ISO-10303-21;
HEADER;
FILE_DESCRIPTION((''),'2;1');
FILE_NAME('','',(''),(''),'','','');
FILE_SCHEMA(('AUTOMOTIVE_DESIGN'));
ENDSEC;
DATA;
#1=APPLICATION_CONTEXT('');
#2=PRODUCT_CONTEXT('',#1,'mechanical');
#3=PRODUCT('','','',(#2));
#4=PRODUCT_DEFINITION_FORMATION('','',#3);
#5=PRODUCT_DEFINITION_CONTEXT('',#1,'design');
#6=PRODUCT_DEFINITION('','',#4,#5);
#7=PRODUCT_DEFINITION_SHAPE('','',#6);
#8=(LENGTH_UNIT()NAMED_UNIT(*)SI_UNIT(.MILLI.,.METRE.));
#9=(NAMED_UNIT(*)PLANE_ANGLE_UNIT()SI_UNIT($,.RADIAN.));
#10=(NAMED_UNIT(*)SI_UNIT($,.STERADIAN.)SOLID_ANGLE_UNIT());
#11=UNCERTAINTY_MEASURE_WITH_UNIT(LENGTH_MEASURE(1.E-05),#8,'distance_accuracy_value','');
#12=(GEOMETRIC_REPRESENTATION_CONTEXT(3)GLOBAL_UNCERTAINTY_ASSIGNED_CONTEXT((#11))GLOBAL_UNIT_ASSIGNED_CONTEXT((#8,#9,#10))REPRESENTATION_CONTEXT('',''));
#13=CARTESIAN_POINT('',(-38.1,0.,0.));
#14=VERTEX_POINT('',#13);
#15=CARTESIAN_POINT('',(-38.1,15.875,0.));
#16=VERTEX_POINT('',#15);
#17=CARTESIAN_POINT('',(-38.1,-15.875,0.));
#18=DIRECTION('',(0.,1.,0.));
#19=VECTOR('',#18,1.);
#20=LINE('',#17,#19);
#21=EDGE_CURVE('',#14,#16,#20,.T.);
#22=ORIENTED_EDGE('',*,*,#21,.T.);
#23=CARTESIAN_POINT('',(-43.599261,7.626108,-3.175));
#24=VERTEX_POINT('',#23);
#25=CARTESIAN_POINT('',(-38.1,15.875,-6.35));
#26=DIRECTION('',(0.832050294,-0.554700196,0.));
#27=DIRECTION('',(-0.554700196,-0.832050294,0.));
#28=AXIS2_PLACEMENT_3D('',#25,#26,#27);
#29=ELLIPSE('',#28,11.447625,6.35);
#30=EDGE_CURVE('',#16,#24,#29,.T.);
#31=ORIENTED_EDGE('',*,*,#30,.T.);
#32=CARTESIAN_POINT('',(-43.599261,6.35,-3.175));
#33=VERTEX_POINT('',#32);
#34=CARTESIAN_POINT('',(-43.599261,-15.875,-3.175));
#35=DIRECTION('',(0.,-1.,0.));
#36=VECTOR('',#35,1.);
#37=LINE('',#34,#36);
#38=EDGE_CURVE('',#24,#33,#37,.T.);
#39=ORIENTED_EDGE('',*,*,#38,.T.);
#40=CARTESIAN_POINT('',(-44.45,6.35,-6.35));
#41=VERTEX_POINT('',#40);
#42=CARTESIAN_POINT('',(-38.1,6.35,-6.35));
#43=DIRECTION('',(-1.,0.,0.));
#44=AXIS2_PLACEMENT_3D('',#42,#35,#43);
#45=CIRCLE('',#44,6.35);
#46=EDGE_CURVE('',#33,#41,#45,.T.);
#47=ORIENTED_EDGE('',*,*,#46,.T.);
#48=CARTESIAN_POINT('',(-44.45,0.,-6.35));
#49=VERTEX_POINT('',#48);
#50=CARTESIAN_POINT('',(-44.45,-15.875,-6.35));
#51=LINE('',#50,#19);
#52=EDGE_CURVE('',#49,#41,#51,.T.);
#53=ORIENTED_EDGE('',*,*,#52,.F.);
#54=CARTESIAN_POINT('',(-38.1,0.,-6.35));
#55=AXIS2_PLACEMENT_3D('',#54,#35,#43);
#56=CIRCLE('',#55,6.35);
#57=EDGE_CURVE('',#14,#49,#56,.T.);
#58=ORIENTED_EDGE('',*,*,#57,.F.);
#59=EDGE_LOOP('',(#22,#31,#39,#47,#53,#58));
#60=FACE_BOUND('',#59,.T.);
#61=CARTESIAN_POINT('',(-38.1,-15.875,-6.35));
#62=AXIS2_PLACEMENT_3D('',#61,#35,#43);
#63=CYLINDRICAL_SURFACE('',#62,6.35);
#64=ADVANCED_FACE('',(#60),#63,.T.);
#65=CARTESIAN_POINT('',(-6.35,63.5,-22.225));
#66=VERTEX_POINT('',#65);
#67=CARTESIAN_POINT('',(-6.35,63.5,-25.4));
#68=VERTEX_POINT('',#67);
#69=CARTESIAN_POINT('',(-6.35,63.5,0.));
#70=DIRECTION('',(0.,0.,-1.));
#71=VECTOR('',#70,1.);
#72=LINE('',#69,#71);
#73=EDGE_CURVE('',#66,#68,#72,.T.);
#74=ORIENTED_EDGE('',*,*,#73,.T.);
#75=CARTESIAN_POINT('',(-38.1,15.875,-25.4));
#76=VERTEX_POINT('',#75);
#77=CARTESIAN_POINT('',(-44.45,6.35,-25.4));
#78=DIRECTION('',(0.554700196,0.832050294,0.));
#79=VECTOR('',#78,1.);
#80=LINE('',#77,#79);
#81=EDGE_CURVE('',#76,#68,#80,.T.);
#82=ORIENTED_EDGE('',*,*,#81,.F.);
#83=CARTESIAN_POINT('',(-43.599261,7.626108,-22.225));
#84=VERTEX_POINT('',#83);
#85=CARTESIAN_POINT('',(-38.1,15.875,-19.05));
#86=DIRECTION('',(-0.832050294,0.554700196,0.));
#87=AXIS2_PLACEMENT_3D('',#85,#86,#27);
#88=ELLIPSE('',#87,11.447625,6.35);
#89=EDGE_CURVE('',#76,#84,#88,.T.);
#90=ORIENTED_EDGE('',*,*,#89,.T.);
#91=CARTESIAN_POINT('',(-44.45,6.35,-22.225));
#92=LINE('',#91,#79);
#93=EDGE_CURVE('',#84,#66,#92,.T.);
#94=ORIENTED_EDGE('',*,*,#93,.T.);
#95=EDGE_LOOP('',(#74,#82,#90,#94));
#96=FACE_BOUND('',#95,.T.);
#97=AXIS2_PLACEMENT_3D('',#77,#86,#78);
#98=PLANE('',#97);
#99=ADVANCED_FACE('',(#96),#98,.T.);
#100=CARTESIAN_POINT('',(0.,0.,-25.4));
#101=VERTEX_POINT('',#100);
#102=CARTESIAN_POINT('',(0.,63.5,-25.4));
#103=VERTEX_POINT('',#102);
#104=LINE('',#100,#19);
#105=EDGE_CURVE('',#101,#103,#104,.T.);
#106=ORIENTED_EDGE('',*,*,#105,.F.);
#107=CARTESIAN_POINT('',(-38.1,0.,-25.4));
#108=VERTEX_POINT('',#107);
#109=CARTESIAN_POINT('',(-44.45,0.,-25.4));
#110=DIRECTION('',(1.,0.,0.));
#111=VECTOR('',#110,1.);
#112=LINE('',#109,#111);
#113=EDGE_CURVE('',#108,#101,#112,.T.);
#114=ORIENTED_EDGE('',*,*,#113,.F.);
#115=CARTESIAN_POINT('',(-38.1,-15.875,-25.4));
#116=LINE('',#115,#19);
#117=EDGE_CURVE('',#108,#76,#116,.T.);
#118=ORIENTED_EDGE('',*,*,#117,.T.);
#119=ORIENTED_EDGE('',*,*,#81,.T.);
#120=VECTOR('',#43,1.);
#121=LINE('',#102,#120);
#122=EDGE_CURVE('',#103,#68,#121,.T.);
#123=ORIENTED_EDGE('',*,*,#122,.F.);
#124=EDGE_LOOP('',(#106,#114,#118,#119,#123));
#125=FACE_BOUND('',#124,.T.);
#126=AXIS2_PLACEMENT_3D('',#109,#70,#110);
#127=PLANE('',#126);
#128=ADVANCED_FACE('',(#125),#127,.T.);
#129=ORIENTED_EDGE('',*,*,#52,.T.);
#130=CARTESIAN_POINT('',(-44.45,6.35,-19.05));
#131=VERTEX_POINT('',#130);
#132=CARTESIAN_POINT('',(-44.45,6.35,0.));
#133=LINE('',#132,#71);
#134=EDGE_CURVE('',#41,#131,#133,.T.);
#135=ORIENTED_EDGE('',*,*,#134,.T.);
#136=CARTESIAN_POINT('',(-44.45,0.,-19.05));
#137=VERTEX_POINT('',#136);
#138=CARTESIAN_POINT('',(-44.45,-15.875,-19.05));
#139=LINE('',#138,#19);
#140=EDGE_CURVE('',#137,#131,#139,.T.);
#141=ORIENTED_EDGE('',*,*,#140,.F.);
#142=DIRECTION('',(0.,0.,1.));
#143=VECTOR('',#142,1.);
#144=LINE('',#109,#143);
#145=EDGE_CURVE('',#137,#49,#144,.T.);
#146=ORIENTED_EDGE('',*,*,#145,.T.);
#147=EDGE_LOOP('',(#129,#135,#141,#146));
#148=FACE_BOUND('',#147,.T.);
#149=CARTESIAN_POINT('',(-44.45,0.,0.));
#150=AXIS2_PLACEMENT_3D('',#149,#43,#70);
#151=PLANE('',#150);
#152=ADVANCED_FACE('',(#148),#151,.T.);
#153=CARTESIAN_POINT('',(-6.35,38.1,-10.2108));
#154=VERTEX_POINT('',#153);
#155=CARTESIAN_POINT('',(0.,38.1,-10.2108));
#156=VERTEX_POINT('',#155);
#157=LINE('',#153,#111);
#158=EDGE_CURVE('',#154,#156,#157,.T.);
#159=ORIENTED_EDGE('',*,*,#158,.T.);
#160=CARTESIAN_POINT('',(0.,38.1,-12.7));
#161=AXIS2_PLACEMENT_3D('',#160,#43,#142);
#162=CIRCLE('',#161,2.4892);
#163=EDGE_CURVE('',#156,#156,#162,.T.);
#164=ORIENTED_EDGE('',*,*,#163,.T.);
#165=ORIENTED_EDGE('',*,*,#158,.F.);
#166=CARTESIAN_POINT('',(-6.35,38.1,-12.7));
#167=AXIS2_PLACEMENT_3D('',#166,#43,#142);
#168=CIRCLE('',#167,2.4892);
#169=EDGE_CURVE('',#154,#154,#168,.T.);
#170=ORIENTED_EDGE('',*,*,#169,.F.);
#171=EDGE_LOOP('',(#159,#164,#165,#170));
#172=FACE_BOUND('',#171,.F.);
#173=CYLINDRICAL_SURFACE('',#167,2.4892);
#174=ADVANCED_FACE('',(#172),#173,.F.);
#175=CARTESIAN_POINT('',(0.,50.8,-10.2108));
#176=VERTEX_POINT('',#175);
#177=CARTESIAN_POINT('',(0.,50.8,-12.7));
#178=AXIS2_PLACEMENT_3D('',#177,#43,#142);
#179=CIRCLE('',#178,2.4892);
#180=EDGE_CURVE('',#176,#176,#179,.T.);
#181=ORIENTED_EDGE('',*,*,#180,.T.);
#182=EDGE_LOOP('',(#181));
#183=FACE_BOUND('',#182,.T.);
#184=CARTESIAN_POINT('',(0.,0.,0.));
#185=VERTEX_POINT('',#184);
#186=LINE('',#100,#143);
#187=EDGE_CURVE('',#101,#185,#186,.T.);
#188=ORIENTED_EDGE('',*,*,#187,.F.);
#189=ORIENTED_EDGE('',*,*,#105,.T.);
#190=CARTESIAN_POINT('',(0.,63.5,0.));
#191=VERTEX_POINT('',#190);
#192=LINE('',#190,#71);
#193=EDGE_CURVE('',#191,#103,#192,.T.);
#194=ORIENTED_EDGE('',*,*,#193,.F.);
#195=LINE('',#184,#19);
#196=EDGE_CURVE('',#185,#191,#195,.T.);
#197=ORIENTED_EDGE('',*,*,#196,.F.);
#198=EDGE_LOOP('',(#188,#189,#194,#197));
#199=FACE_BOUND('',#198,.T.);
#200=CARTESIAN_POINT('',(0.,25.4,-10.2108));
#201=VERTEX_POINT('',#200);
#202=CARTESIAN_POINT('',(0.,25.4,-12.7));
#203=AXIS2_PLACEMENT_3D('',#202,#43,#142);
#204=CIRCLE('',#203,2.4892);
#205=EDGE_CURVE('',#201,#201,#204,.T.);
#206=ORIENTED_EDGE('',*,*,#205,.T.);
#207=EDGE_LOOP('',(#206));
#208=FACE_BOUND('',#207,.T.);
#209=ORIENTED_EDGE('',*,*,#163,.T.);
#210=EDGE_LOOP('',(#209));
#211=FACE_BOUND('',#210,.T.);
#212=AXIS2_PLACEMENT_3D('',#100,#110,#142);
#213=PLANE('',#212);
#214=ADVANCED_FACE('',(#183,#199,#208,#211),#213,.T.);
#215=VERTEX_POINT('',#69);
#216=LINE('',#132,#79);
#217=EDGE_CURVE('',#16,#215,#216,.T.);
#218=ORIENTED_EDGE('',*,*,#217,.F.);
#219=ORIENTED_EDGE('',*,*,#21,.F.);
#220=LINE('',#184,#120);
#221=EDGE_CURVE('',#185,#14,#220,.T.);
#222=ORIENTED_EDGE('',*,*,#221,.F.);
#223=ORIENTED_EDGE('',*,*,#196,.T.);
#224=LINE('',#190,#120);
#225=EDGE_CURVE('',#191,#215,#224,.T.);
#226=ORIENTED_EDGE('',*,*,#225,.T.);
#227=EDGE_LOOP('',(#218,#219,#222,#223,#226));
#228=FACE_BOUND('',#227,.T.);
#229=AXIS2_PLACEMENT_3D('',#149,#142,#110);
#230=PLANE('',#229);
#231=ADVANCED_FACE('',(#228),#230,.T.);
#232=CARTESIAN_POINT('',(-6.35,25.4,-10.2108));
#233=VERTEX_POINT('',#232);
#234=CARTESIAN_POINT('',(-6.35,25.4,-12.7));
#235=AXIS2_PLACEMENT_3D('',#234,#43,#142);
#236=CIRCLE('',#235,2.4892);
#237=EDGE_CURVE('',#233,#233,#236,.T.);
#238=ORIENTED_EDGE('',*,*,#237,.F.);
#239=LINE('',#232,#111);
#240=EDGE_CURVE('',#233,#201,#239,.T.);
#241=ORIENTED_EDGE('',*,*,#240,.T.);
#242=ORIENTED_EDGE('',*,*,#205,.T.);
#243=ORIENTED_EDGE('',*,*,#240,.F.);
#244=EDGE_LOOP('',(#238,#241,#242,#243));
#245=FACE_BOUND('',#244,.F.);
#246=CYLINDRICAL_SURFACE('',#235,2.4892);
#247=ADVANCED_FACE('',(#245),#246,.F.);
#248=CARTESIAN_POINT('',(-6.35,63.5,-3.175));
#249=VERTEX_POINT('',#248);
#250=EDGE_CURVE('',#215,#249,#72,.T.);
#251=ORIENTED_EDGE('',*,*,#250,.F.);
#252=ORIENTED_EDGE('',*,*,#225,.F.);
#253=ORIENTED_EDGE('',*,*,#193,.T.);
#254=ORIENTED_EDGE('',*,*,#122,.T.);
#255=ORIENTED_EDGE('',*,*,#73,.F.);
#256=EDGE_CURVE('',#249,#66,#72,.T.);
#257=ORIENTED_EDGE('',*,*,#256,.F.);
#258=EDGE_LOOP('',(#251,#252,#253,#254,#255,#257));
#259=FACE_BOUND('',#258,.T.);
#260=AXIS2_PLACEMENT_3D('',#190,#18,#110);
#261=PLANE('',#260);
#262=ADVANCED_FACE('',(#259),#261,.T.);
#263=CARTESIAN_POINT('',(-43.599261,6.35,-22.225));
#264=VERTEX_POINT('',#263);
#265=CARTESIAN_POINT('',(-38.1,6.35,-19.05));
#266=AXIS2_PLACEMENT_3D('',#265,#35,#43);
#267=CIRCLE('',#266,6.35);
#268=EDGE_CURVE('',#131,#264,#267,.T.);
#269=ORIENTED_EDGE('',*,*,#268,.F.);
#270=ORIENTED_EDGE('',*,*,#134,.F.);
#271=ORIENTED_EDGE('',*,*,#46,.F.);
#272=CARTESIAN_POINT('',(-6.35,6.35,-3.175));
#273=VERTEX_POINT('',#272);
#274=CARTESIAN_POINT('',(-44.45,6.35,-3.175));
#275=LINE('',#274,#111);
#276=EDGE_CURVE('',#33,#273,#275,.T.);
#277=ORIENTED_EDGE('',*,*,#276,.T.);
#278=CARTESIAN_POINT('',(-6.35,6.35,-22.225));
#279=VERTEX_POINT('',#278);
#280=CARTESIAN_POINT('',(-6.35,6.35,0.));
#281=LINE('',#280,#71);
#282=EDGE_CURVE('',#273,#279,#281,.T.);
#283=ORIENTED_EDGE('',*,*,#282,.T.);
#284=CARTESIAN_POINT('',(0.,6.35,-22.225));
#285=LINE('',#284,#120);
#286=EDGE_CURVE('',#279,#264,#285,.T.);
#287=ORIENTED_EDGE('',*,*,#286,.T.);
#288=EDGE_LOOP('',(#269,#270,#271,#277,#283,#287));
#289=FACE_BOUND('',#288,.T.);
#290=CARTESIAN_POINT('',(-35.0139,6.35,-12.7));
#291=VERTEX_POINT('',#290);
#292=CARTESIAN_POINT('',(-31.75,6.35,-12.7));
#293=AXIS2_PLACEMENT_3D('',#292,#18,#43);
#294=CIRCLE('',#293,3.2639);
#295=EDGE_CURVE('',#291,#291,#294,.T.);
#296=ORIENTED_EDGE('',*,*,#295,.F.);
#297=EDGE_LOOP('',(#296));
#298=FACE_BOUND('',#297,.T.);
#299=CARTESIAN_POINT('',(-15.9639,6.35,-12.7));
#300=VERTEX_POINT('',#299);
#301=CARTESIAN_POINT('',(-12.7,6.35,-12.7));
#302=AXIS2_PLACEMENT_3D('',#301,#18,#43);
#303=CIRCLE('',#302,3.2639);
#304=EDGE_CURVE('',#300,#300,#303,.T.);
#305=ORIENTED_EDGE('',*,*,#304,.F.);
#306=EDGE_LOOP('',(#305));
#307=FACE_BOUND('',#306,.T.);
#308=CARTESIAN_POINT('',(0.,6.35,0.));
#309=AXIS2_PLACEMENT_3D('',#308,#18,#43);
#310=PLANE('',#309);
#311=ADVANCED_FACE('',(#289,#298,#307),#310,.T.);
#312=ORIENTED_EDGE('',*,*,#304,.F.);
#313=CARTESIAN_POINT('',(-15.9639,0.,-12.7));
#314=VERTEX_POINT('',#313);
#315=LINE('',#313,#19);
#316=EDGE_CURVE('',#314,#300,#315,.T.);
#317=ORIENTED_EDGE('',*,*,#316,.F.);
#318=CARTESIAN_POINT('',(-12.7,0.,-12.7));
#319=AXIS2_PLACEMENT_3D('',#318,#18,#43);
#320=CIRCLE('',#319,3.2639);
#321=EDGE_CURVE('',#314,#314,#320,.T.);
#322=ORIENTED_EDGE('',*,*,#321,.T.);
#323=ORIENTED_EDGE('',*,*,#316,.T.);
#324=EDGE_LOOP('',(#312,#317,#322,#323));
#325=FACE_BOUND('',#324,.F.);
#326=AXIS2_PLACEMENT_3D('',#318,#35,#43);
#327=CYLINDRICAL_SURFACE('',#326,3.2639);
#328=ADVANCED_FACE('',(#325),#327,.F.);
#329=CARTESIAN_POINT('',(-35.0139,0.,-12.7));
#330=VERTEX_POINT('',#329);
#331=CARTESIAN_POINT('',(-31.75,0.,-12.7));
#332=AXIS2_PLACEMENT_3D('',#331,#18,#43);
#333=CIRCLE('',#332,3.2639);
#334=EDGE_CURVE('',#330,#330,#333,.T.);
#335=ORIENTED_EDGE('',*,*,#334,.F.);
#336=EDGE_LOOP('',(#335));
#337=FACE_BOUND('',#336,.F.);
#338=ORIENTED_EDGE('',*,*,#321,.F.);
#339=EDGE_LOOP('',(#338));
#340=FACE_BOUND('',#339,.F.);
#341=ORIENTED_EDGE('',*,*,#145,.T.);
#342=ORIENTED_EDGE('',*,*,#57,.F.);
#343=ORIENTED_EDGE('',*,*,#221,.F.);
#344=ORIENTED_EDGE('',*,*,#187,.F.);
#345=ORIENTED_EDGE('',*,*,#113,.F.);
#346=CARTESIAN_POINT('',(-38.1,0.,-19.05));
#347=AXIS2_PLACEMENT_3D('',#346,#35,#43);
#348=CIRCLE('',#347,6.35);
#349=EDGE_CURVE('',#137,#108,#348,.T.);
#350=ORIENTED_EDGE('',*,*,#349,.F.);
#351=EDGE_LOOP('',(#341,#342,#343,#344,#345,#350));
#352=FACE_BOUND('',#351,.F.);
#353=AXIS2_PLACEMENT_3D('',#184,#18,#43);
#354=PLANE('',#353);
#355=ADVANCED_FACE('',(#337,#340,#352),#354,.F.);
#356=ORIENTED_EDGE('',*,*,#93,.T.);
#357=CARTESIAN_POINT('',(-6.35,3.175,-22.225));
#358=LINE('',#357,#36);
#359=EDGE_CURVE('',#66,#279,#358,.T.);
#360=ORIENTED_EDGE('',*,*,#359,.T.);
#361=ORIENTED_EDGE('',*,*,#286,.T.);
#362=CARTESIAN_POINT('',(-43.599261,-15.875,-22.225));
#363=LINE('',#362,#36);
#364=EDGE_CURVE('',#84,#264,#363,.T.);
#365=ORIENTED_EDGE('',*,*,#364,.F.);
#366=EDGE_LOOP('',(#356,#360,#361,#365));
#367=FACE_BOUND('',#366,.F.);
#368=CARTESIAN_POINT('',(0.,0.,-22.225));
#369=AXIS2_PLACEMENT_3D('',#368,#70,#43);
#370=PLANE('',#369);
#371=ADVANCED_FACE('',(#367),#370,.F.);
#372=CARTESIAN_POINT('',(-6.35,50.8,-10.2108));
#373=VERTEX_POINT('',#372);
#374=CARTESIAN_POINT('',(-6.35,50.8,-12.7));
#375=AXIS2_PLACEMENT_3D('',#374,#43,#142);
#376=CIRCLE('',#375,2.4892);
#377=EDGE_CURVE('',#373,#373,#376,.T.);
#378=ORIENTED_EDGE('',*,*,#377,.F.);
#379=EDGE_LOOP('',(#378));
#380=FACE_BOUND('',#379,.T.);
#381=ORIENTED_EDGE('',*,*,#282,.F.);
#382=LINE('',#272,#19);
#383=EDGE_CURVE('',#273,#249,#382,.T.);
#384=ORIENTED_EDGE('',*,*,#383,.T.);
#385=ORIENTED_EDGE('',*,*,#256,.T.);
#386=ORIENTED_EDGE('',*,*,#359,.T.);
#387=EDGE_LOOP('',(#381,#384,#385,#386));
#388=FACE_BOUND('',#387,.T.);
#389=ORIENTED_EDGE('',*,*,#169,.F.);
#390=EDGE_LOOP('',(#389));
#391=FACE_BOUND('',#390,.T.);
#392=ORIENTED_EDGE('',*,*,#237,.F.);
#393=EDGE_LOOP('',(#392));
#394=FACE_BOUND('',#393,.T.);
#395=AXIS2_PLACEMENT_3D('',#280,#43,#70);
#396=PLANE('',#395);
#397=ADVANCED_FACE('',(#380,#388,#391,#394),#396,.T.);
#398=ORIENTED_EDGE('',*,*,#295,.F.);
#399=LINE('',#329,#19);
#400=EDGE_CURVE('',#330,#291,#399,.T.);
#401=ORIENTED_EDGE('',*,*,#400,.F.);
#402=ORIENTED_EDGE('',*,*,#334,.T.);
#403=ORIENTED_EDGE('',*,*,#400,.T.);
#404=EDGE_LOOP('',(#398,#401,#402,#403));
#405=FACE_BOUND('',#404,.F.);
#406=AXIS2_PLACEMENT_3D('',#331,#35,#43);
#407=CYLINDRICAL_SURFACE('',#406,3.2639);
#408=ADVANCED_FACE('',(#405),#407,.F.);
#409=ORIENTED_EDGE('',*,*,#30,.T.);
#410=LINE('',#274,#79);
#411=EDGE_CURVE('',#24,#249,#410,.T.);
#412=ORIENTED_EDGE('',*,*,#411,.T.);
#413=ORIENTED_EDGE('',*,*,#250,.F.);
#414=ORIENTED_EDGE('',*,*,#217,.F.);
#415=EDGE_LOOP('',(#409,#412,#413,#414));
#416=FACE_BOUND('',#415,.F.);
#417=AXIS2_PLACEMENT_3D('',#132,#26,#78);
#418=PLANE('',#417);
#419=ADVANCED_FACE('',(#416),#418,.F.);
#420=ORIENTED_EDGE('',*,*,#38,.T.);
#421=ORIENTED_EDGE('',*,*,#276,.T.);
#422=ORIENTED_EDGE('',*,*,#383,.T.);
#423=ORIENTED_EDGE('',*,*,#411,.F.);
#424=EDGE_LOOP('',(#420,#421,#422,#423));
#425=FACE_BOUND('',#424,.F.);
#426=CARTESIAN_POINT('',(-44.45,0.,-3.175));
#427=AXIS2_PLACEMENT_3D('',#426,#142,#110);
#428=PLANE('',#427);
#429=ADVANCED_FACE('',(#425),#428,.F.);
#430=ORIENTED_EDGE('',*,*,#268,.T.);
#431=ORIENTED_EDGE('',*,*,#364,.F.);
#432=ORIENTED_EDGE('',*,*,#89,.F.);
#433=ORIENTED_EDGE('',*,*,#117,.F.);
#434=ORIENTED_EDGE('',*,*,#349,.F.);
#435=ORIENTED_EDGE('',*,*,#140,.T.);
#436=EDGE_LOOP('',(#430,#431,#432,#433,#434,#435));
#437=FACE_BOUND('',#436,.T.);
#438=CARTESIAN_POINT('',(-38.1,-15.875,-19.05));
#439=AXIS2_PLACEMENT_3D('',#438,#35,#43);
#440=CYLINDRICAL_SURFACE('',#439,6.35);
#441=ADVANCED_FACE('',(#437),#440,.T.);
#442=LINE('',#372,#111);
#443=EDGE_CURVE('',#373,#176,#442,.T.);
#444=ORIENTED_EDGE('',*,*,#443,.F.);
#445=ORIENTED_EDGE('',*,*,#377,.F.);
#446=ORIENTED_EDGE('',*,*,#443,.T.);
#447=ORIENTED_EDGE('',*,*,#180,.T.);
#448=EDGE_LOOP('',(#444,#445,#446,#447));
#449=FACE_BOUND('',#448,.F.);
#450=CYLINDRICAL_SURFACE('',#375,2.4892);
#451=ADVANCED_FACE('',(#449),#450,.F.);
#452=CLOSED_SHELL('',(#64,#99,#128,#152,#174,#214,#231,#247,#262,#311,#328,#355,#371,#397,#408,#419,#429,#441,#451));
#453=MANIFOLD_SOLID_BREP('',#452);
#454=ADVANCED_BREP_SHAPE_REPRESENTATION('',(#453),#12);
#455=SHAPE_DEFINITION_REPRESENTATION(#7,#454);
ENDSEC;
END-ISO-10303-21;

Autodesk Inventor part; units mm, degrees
ref_plane "YZ Plane" through (0, 0, 0) normal (1, 0, 0) x (0, 1, 0)
ref_plane "XZ Plane" through (0, 0, 0) normal (0, 1, 0) x (-1, 0, 0)
ref_plane "XY Plane" through (0, 0, 0) normal (0, 0, 1) x (1, 0, 0)
sketch "Sketch1" plane through (0, 0, 0) normal (0, 1, 0) x (-1, 0, 0)
  line L0 (0, 0) -> (44.45, 0)
  line L1 (44.45, 0) -> (44.45, -25.4)
  line L2 (44.45, -25.4) -> (0, -25.4)
  line L3 (0, -25.4) -> (0, 0)
  circle A0 centre (12.7, -12.7) radius 3.2639
  circle A1 centre (31.75, -12.7) radius 3.2639
  point P0 (0, -12.7)
  dimension "d0" = 44.45
  dimension "d1" = 25.4
  dimension "d2" = 6.5278
  dimension "d3" = 19.05
  dimension "d4" = 12.7
  dimension "d5" = 12.7
extrude "Extrusion1" add sketch "Sketch1" along normal blind 6.35
sketch "Sketch2" plane through (0, 6.35, 0) normal (0, 1, 0) x (1, 0, 0)
  line L0 (0, 25.4) -> (-44.45, 25.4) projected
  line L1 (0, 0) -> (-6.35, 0)
  line L2 (-6.35, 0) -> (-6.35, 25.4)
  line L3 (-6.35, 25.4) -> (0, 25.4)
  line L4 (0, 25.4) -> (0, 0)
  dimension "d8" = 6.35
extrude "Extrusion2" add sketch "Sketch2" along normal blind 57.15
sketch "Sketch3" plane through (-6.35, 6.35, -25.4) normal (-1, 0, 0) x (0, 0, 1)
  circle A0 centre (12.7, 19.05) radius 2.4892
  circle A1 centre (12.7, 44.45) radius 2.4892
  line L0 (0, 0) -> (25.4, 0) projected
  line L1 (25.4, 0) -> (25.4, 57.15) projected
  circle A2 centre (12.7, 31.75) radius 2.4892
  point P0 (25.4, -6.35)
  dimension "d11" = 4.9784
  dimension "d12" = 4.9784
  dimension "d13" = 25.4
  dimension "d14" = 19.05
  dimension "d15" = 12.7
  dimension "d23" = 12.7
extrude "Extrusion3" cut sketch "Sketch3" against normal through all
sketch "Sketch4" plane through (-44.45, 0, 0) normal (0, 0, 1) x (1, 0, 0)
  line L0 (0, 6.35) -> (38.1, 6.35) projected
  line L1 (0, 0) -> (44.45, 0) projected
  line L2 (44.45, 0) -> (44.45, 63.5) projected
  line L3 (38.1, 63.5) -> (44.45, 63.5) projected
  line L4 (38.1, 6.35) -> (38.1, 63.5) projected
  line L5 (0, 6.35) -> (38.1, 6.35) projected
  line L6 (0, 0) -> (0, 6.35) projected
  line L7 (0, 6.35) -> (38.1, 63.5)
  line L8 (44.45, 63.5) -> (44.45, 0)
  line L9 (0, 0) -> (0, 6.35)
  line L10 (44.45, 0) -> (0, 0)
  line L11 (38.1, 63.5) -> (44.45, 63.5)
extrude "Extrusion4" add sketch "Sketch4" against normal blind 3.175 contours L7 L4 L0
sketch "Sketch5" plane through (0, 0, -25.4) normal (0, 0, -1) x (-1, 0, 0)
  line L0 (0, 0) -> (44.45, 0) projected
  line L1 (44.45, 0) -> (44.45, 6.35) projected
  line L2 (6.35, 6.35) -> (44.45, 6.35) projected
  line L3 (6.35, 6.35) -> (6.35, 63.5) projected
  line L4 (0, 63.5) -> (6.35, 63.5) projected
  line L5 (0, 0) -> (0, 63.5) projected
  line L6 (44.45, 6.35) -> (44.45, 0)
  line L7 (0, 0) -> (44.45, 0)
  line L8 (44.45, 6.35) -> (6.35, 63.5)
  line L9 (0, 0) -> (0, 63.5) projected
  line L10 (6.35, 63.5) -> (0, 63.5)
  line L11 (0, 63.5) -> (0, 0)
extrude "Extrusion5" add sketch "Sketch5" against normal blind 3.175
fillet "Fillet1" radius 6.35 2 edges at (-44.45, 3.175, -25.4) (-44.45, 3.175, 0)
properties part number "INDX_025_backshuffleBracket" material "ABS Plastic"
